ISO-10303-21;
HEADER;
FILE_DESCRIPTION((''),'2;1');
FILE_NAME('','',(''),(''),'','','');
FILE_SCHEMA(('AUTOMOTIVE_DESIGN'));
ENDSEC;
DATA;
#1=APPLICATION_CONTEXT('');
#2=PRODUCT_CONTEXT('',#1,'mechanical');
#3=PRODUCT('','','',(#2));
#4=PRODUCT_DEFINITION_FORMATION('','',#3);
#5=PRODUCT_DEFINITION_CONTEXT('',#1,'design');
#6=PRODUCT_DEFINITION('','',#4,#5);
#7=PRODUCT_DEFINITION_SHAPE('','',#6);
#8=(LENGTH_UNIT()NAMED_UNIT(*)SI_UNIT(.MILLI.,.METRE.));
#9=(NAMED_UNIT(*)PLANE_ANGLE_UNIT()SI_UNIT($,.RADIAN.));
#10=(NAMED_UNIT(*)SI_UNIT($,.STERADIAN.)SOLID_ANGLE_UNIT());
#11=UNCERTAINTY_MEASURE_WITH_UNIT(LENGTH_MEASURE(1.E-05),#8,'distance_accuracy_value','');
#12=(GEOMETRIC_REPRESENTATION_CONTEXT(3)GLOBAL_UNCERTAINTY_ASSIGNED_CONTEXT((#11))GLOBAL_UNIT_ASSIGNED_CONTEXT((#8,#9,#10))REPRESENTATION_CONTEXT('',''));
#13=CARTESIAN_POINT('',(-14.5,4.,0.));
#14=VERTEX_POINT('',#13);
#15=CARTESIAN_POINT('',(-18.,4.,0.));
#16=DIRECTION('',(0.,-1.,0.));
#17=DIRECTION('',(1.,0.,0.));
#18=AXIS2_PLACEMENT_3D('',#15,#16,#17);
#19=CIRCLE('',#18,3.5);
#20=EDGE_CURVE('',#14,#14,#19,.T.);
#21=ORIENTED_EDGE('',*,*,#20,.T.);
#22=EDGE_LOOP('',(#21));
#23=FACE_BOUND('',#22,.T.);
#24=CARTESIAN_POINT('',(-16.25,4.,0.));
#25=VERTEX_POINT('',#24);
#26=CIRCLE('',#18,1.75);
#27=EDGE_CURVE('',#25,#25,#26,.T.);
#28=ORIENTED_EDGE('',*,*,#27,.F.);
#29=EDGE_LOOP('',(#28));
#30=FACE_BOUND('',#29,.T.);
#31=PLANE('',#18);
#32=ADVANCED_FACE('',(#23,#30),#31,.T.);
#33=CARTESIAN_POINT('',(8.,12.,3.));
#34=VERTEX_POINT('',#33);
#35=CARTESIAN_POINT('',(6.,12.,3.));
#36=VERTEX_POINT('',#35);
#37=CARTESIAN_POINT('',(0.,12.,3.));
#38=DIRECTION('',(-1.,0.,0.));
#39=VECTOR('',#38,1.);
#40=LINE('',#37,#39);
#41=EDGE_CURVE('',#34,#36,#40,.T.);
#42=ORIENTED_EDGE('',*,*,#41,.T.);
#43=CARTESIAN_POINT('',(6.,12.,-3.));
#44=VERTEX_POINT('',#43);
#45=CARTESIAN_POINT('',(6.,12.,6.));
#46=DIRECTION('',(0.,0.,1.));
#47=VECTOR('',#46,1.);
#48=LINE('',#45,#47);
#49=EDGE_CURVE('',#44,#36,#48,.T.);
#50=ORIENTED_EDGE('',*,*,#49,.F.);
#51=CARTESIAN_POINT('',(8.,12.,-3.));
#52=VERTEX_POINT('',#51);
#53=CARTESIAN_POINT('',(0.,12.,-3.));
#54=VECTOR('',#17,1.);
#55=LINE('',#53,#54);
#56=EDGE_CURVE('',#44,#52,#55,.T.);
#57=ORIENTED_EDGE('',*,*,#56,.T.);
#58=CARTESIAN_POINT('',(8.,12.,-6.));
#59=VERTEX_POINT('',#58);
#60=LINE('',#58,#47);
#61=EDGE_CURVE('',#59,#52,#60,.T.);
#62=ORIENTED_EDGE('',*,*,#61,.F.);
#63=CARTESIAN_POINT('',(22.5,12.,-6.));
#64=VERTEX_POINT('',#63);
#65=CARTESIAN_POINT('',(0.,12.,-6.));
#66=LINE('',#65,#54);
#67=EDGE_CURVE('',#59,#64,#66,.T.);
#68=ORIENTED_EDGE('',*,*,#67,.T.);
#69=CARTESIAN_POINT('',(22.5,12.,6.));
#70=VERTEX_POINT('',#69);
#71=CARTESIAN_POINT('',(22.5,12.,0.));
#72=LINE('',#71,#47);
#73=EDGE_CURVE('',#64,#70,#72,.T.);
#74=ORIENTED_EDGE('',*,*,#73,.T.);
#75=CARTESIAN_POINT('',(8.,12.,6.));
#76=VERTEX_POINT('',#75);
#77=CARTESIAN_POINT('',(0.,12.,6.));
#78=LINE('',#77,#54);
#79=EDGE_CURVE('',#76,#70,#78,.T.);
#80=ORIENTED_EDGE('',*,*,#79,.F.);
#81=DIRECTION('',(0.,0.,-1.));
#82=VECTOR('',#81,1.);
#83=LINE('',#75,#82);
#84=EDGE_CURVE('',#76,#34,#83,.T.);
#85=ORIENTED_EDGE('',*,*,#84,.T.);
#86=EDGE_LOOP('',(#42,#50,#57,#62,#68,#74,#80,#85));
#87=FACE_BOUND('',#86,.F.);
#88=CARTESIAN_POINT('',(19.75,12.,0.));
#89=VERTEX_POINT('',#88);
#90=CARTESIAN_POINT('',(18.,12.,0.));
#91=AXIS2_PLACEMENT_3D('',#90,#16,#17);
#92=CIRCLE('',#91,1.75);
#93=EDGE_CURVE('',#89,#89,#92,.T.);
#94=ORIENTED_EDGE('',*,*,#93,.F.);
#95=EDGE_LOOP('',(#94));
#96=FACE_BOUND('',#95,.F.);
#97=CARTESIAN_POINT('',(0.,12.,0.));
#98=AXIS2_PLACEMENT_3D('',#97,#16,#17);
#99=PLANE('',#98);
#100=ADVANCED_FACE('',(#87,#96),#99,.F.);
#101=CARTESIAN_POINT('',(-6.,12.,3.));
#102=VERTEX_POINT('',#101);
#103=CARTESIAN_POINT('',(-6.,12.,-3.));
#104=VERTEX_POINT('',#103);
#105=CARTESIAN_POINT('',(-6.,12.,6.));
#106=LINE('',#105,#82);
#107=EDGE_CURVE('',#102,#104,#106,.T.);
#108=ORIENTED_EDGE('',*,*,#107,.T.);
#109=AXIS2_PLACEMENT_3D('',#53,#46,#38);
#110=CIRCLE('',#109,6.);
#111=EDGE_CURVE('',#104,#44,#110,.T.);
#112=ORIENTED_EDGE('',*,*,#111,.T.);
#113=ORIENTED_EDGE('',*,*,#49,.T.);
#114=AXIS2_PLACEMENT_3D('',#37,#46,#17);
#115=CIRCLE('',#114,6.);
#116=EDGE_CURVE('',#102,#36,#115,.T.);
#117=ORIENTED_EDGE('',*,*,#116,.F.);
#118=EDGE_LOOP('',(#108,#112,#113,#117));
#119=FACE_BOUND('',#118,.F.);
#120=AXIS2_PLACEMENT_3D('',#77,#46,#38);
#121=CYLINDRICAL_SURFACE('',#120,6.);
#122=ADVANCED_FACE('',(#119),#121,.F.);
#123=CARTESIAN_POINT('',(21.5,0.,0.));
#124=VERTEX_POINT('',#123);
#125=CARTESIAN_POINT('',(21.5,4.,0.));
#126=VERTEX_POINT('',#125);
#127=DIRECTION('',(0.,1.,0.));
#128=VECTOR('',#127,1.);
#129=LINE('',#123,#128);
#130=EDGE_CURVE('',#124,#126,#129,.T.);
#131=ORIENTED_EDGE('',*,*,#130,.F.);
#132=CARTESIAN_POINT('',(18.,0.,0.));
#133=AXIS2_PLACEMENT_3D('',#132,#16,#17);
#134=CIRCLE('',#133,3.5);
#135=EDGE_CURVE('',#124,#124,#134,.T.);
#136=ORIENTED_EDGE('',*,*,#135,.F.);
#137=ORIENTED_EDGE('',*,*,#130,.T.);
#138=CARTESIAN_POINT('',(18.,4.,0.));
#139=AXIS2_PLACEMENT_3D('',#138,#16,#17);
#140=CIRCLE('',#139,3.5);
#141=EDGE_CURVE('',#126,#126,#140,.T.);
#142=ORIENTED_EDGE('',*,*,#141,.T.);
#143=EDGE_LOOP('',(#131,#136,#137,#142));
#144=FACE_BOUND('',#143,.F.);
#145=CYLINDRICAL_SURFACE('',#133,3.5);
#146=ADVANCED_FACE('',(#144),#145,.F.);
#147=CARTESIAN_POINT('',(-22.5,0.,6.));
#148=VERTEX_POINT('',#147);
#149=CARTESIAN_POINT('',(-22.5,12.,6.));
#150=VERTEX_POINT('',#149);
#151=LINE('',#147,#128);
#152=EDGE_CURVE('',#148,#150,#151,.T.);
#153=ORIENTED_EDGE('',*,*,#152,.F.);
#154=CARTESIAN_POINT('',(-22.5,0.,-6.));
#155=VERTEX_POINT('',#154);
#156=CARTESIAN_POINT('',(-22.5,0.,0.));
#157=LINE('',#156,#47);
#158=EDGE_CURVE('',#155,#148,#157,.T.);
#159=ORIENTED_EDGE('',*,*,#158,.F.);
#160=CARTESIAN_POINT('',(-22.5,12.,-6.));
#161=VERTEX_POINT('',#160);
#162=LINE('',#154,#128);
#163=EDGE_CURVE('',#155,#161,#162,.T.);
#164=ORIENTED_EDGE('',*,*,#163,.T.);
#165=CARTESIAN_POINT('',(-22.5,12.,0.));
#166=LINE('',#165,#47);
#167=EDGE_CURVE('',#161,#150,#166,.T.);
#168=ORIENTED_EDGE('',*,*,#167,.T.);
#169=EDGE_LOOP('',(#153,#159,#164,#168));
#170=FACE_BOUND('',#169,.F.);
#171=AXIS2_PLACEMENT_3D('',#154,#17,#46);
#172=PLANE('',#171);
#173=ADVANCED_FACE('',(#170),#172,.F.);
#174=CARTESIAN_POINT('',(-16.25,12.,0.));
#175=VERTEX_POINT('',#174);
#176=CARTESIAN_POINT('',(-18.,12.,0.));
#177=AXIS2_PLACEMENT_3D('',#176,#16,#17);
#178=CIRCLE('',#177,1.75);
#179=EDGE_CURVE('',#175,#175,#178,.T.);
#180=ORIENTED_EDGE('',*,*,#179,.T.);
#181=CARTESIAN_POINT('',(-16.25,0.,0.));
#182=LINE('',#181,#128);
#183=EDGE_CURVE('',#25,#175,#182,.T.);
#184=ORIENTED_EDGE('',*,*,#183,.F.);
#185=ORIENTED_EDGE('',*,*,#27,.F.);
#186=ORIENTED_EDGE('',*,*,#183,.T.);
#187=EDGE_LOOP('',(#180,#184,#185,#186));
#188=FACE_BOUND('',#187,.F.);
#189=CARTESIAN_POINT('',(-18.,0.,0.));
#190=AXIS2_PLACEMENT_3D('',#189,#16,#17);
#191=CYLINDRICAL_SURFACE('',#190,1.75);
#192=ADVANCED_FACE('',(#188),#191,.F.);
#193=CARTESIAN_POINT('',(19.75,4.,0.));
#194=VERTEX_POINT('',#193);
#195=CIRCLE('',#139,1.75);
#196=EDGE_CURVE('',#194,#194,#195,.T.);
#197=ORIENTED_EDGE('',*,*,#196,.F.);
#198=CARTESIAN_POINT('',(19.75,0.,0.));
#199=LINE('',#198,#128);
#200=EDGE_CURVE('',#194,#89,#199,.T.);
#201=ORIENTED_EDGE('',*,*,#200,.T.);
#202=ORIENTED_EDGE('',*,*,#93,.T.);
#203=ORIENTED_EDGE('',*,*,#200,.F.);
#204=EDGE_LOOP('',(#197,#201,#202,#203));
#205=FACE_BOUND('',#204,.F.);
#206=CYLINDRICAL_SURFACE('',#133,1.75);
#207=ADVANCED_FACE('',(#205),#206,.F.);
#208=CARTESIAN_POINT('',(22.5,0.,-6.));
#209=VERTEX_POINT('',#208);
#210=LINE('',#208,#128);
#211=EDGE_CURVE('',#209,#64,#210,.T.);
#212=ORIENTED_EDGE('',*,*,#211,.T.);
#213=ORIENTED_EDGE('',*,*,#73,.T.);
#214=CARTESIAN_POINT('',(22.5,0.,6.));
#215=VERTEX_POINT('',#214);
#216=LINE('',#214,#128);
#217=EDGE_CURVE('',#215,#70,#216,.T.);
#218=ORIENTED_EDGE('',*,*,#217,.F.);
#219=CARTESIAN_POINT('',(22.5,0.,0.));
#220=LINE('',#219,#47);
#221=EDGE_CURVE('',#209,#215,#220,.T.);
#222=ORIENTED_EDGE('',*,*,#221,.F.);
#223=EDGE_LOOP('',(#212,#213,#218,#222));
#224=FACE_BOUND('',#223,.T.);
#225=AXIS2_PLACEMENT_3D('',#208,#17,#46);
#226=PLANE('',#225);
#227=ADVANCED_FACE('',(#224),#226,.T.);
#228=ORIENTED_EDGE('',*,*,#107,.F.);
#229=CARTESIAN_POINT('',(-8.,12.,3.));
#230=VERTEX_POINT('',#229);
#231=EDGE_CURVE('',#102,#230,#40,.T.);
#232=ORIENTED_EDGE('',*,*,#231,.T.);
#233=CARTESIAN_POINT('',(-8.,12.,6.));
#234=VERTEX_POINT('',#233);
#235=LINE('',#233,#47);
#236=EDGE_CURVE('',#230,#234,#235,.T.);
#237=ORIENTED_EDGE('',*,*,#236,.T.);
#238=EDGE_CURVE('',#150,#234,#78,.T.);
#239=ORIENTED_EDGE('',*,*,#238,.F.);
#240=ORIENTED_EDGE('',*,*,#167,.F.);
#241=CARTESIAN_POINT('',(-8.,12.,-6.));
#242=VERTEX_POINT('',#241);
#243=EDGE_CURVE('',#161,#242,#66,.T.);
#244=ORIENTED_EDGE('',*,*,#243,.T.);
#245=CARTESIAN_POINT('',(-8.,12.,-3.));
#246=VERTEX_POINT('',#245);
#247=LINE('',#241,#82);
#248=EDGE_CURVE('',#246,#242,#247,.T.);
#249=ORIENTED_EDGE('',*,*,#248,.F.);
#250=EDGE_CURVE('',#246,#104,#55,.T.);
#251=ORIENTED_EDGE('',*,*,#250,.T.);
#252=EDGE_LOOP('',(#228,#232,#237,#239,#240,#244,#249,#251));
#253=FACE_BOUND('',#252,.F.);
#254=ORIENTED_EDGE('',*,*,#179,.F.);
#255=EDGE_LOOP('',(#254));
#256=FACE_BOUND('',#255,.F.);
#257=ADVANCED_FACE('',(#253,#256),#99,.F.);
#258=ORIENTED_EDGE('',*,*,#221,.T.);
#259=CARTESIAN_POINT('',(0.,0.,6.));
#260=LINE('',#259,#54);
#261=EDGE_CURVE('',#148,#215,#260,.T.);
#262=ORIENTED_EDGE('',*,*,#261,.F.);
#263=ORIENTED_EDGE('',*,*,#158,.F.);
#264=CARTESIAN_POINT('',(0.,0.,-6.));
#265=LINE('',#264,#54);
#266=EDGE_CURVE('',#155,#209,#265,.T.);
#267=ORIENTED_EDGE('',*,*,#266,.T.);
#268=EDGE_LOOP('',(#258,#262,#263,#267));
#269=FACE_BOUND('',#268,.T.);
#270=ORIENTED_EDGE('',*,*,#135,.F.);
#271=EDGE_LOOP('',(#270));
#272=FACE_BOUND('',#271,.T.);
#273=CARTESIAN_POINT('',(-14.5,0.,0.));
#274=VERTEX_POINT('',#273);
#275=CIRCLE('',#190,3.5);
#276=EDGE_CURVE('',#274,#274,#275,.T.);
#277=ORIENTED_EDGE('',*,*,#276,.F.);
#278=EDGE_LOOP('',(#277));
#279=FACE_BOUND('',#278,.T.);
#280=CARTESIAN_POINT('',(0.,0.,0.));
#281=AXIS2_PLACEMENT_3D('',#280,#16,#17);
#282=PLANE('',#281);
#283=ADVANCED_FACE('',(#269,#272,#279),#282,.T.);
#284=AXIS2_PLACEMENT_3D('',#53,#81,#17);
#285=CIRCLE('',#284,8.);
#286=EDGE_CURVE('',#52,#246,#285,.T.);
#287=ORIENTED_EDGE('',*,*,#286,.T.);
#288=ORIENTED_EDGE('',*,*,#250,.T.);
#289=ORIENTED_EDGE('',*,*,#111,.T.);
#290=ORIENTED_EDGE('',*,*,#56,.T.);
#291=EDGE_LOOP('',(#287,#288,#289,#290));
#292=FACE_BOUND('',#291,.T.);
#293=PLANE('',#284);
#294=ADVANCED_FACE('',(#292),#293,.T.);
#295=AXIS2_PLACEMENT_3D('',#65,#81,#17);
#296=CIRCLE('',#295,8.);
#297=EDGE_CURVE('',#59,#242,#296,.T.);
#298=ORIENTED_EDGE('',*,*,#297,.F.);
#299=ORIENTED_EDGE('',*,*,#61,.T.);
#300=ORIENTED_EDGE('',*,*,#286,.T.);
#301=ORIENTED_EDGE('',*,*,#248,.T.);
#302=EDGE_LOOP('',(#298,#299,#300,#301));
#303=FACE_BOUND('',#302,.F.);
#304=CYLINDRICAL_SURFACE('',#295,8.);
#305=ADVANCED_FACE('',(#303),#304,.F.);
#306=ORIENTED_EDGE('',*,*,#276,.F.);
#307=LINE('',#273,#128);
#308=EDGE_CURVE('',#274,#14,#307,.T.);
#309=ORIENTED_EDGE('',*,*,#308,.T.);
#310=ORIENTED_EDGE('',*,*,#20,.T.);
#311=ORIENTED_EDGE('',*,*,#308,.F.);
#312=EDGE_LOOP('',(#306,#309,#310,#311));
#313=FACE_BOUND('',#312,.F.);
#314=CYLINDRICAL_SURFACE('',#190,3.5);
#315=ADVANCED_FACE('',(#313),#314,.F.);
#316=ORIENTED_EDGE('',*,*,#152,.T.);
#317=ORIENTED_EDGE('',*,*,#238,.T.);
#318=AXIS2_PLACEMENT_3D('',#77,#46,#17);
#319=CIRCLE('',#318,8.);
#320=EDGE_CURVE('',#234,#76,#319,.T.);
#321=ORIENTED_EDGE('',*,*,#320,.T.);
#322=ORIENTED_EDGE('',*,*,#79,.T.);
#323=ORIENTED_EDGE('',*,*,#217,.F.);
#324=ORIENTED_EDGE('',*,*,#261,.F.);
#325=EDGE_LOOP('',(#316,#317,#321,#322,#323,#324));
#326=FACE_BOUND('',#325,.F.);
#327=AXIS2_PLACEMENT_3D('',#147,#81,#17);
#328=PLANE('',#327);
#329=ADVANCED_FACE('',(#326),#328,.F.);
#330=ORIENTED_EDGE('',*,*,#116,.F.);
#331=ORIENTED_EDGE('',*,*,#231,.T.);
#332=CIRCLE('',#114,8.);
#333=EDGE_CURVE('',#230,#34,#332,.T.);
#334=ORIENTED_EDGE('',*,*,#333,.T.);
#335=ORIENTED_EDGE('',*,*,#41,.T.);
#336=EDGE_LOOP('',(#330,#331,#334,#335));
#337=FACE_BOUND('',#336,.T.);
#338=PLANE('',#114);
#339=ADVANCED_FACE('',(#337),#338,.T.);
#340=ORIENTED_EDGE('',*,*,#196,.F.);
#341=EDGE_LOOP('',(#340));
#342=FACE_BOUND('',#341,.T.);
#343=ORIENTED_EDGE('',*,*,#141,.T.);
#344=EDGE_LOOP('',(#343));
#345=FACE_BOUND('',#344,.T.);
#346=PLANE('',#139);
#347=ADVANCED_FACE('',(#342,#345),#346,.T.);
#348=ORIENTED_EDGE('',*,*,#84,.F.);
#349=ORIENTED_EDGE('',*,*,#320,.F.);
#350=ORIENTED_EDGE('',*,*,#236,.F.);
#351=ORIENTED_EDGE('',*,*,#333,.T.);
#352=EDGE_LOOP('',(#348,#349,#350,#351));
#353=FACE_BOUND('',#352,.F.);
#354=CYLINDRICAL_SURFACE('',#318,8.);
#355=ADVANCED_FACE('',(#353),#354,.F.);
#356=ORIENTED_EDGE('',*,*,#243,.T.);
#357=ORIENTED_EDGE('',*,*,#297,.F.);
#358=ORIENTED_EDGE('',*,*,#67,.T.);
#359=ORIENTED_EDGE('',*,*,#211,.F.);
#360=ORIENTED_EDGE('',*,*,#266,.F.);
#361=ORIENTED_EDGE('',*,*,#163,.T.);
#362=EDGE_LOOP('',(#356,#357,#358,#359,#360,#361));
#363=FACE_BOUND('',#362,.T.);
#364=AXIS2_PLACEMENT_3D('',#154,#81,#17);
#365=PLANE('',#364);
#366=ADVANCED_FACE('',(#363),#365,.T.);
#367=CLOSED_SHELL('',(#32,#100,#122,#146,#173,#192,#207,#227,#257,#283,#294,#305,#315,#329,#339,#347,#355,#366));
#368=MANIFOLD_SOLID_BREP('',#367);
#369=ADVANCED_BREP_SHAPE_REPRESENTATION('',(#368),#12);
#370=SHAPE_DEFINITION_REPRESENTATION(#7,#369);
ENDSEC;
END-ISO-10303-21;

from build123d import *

# Parameters (mm, degrees)
F0_W     = 45
F0_H     = 12
F0_R     = 3.5
F0_R_2   = 1.75
F1_DEPTH = 12
F2_DEPTH = 4
F4_DEPTH = 12.001
F3_R     = 8
F3_R_2   = 6
F5_DEPTH = 3
F6_R     = 8
F7_DEPTH = 3


with BuildPart() as f1:
    # F0 (on Front) → F1 (new body)
    with BuildSketch(Plane.XZ):
        Rectangle(F0_W, F0_H)
        with Locations((-18, 0)):
            Circle(F0_R, mode=Mode.SUBTRACT)
        with Locations((18, 0)):
            Circle(F0_R, mode=Mode.SUBTRACT)
        with Locations((-18, 0)):
            Circle(F0_R)
        with Locations((-18, 0)):
            Circle(F0_R_2, mode=Mode.SUBTRACT)
        with Locations((18, 0)):
            Circle(F0_R)
        with Locations((18, 0)):
            Circle(F0_R_2, mode=Mode.SUBTRACT)
    extrude(amount=-F1_DEPTH)

    # F0 (on Front) → F2 (cut)
    with BuildSketch(Plane.XZ):
        with Locations((-18, 0)):
            Circle(F0_R)
        with Locations((-18, 0)):
            Circle(F0_R_2, mode=Mode.SUBTRACT)
        with Locations((18, 0)):
            Circle(F0_R)
        with Locations((18, 0)):
            Circle(F0_R_2, mode=Mode.SUBTRACT)
    extrude(amount=-F2_DEPTH, mode=Mode.SUBTRACT)

    # F3 (on face) → F4 (cut, through all)
    with BuildSketch(Plane.XY.offset(6)):
        with BuildLine():
            Line((-6, 12), (6, 12))
            ThreePointArc((6, 12), (0, 18), (-6, 12))
        make_face()
        with BuildLine():
            ThreePointArc((-6, 12), (0, 6), (6, 12))
            Line((6, 12), (-6, 12))
        make_face()
    extrude(amount=-F4_DEPTH, mode=Mode.SUBTRACT)

    # F3 (on face) → F5 (cut)
    with BuildSketch(Plane.XY.offset(6)):
        with Locations((0, 12)):
            Circle(F3_R)
        with Locations((0, 12)):
            Circle(F3_R_2, mode=Mode.SUBTRACT)
    extrude(amount=-F5_DEPTH, mode=Mode.SUBTRACT)

    # F6 (on face) → F7 (cut)
    with BuildSketch(Plane(origin=(0, 0, -6), x_dir=(1, 0, 0), z_dir=(0, 0, -1))):
        with Locations((0, -12)):
            Circle(F6_R)
    extrude(amount=-F7_DEPTH, mode=Mode.SUBTRACT)


solid = f1.part
